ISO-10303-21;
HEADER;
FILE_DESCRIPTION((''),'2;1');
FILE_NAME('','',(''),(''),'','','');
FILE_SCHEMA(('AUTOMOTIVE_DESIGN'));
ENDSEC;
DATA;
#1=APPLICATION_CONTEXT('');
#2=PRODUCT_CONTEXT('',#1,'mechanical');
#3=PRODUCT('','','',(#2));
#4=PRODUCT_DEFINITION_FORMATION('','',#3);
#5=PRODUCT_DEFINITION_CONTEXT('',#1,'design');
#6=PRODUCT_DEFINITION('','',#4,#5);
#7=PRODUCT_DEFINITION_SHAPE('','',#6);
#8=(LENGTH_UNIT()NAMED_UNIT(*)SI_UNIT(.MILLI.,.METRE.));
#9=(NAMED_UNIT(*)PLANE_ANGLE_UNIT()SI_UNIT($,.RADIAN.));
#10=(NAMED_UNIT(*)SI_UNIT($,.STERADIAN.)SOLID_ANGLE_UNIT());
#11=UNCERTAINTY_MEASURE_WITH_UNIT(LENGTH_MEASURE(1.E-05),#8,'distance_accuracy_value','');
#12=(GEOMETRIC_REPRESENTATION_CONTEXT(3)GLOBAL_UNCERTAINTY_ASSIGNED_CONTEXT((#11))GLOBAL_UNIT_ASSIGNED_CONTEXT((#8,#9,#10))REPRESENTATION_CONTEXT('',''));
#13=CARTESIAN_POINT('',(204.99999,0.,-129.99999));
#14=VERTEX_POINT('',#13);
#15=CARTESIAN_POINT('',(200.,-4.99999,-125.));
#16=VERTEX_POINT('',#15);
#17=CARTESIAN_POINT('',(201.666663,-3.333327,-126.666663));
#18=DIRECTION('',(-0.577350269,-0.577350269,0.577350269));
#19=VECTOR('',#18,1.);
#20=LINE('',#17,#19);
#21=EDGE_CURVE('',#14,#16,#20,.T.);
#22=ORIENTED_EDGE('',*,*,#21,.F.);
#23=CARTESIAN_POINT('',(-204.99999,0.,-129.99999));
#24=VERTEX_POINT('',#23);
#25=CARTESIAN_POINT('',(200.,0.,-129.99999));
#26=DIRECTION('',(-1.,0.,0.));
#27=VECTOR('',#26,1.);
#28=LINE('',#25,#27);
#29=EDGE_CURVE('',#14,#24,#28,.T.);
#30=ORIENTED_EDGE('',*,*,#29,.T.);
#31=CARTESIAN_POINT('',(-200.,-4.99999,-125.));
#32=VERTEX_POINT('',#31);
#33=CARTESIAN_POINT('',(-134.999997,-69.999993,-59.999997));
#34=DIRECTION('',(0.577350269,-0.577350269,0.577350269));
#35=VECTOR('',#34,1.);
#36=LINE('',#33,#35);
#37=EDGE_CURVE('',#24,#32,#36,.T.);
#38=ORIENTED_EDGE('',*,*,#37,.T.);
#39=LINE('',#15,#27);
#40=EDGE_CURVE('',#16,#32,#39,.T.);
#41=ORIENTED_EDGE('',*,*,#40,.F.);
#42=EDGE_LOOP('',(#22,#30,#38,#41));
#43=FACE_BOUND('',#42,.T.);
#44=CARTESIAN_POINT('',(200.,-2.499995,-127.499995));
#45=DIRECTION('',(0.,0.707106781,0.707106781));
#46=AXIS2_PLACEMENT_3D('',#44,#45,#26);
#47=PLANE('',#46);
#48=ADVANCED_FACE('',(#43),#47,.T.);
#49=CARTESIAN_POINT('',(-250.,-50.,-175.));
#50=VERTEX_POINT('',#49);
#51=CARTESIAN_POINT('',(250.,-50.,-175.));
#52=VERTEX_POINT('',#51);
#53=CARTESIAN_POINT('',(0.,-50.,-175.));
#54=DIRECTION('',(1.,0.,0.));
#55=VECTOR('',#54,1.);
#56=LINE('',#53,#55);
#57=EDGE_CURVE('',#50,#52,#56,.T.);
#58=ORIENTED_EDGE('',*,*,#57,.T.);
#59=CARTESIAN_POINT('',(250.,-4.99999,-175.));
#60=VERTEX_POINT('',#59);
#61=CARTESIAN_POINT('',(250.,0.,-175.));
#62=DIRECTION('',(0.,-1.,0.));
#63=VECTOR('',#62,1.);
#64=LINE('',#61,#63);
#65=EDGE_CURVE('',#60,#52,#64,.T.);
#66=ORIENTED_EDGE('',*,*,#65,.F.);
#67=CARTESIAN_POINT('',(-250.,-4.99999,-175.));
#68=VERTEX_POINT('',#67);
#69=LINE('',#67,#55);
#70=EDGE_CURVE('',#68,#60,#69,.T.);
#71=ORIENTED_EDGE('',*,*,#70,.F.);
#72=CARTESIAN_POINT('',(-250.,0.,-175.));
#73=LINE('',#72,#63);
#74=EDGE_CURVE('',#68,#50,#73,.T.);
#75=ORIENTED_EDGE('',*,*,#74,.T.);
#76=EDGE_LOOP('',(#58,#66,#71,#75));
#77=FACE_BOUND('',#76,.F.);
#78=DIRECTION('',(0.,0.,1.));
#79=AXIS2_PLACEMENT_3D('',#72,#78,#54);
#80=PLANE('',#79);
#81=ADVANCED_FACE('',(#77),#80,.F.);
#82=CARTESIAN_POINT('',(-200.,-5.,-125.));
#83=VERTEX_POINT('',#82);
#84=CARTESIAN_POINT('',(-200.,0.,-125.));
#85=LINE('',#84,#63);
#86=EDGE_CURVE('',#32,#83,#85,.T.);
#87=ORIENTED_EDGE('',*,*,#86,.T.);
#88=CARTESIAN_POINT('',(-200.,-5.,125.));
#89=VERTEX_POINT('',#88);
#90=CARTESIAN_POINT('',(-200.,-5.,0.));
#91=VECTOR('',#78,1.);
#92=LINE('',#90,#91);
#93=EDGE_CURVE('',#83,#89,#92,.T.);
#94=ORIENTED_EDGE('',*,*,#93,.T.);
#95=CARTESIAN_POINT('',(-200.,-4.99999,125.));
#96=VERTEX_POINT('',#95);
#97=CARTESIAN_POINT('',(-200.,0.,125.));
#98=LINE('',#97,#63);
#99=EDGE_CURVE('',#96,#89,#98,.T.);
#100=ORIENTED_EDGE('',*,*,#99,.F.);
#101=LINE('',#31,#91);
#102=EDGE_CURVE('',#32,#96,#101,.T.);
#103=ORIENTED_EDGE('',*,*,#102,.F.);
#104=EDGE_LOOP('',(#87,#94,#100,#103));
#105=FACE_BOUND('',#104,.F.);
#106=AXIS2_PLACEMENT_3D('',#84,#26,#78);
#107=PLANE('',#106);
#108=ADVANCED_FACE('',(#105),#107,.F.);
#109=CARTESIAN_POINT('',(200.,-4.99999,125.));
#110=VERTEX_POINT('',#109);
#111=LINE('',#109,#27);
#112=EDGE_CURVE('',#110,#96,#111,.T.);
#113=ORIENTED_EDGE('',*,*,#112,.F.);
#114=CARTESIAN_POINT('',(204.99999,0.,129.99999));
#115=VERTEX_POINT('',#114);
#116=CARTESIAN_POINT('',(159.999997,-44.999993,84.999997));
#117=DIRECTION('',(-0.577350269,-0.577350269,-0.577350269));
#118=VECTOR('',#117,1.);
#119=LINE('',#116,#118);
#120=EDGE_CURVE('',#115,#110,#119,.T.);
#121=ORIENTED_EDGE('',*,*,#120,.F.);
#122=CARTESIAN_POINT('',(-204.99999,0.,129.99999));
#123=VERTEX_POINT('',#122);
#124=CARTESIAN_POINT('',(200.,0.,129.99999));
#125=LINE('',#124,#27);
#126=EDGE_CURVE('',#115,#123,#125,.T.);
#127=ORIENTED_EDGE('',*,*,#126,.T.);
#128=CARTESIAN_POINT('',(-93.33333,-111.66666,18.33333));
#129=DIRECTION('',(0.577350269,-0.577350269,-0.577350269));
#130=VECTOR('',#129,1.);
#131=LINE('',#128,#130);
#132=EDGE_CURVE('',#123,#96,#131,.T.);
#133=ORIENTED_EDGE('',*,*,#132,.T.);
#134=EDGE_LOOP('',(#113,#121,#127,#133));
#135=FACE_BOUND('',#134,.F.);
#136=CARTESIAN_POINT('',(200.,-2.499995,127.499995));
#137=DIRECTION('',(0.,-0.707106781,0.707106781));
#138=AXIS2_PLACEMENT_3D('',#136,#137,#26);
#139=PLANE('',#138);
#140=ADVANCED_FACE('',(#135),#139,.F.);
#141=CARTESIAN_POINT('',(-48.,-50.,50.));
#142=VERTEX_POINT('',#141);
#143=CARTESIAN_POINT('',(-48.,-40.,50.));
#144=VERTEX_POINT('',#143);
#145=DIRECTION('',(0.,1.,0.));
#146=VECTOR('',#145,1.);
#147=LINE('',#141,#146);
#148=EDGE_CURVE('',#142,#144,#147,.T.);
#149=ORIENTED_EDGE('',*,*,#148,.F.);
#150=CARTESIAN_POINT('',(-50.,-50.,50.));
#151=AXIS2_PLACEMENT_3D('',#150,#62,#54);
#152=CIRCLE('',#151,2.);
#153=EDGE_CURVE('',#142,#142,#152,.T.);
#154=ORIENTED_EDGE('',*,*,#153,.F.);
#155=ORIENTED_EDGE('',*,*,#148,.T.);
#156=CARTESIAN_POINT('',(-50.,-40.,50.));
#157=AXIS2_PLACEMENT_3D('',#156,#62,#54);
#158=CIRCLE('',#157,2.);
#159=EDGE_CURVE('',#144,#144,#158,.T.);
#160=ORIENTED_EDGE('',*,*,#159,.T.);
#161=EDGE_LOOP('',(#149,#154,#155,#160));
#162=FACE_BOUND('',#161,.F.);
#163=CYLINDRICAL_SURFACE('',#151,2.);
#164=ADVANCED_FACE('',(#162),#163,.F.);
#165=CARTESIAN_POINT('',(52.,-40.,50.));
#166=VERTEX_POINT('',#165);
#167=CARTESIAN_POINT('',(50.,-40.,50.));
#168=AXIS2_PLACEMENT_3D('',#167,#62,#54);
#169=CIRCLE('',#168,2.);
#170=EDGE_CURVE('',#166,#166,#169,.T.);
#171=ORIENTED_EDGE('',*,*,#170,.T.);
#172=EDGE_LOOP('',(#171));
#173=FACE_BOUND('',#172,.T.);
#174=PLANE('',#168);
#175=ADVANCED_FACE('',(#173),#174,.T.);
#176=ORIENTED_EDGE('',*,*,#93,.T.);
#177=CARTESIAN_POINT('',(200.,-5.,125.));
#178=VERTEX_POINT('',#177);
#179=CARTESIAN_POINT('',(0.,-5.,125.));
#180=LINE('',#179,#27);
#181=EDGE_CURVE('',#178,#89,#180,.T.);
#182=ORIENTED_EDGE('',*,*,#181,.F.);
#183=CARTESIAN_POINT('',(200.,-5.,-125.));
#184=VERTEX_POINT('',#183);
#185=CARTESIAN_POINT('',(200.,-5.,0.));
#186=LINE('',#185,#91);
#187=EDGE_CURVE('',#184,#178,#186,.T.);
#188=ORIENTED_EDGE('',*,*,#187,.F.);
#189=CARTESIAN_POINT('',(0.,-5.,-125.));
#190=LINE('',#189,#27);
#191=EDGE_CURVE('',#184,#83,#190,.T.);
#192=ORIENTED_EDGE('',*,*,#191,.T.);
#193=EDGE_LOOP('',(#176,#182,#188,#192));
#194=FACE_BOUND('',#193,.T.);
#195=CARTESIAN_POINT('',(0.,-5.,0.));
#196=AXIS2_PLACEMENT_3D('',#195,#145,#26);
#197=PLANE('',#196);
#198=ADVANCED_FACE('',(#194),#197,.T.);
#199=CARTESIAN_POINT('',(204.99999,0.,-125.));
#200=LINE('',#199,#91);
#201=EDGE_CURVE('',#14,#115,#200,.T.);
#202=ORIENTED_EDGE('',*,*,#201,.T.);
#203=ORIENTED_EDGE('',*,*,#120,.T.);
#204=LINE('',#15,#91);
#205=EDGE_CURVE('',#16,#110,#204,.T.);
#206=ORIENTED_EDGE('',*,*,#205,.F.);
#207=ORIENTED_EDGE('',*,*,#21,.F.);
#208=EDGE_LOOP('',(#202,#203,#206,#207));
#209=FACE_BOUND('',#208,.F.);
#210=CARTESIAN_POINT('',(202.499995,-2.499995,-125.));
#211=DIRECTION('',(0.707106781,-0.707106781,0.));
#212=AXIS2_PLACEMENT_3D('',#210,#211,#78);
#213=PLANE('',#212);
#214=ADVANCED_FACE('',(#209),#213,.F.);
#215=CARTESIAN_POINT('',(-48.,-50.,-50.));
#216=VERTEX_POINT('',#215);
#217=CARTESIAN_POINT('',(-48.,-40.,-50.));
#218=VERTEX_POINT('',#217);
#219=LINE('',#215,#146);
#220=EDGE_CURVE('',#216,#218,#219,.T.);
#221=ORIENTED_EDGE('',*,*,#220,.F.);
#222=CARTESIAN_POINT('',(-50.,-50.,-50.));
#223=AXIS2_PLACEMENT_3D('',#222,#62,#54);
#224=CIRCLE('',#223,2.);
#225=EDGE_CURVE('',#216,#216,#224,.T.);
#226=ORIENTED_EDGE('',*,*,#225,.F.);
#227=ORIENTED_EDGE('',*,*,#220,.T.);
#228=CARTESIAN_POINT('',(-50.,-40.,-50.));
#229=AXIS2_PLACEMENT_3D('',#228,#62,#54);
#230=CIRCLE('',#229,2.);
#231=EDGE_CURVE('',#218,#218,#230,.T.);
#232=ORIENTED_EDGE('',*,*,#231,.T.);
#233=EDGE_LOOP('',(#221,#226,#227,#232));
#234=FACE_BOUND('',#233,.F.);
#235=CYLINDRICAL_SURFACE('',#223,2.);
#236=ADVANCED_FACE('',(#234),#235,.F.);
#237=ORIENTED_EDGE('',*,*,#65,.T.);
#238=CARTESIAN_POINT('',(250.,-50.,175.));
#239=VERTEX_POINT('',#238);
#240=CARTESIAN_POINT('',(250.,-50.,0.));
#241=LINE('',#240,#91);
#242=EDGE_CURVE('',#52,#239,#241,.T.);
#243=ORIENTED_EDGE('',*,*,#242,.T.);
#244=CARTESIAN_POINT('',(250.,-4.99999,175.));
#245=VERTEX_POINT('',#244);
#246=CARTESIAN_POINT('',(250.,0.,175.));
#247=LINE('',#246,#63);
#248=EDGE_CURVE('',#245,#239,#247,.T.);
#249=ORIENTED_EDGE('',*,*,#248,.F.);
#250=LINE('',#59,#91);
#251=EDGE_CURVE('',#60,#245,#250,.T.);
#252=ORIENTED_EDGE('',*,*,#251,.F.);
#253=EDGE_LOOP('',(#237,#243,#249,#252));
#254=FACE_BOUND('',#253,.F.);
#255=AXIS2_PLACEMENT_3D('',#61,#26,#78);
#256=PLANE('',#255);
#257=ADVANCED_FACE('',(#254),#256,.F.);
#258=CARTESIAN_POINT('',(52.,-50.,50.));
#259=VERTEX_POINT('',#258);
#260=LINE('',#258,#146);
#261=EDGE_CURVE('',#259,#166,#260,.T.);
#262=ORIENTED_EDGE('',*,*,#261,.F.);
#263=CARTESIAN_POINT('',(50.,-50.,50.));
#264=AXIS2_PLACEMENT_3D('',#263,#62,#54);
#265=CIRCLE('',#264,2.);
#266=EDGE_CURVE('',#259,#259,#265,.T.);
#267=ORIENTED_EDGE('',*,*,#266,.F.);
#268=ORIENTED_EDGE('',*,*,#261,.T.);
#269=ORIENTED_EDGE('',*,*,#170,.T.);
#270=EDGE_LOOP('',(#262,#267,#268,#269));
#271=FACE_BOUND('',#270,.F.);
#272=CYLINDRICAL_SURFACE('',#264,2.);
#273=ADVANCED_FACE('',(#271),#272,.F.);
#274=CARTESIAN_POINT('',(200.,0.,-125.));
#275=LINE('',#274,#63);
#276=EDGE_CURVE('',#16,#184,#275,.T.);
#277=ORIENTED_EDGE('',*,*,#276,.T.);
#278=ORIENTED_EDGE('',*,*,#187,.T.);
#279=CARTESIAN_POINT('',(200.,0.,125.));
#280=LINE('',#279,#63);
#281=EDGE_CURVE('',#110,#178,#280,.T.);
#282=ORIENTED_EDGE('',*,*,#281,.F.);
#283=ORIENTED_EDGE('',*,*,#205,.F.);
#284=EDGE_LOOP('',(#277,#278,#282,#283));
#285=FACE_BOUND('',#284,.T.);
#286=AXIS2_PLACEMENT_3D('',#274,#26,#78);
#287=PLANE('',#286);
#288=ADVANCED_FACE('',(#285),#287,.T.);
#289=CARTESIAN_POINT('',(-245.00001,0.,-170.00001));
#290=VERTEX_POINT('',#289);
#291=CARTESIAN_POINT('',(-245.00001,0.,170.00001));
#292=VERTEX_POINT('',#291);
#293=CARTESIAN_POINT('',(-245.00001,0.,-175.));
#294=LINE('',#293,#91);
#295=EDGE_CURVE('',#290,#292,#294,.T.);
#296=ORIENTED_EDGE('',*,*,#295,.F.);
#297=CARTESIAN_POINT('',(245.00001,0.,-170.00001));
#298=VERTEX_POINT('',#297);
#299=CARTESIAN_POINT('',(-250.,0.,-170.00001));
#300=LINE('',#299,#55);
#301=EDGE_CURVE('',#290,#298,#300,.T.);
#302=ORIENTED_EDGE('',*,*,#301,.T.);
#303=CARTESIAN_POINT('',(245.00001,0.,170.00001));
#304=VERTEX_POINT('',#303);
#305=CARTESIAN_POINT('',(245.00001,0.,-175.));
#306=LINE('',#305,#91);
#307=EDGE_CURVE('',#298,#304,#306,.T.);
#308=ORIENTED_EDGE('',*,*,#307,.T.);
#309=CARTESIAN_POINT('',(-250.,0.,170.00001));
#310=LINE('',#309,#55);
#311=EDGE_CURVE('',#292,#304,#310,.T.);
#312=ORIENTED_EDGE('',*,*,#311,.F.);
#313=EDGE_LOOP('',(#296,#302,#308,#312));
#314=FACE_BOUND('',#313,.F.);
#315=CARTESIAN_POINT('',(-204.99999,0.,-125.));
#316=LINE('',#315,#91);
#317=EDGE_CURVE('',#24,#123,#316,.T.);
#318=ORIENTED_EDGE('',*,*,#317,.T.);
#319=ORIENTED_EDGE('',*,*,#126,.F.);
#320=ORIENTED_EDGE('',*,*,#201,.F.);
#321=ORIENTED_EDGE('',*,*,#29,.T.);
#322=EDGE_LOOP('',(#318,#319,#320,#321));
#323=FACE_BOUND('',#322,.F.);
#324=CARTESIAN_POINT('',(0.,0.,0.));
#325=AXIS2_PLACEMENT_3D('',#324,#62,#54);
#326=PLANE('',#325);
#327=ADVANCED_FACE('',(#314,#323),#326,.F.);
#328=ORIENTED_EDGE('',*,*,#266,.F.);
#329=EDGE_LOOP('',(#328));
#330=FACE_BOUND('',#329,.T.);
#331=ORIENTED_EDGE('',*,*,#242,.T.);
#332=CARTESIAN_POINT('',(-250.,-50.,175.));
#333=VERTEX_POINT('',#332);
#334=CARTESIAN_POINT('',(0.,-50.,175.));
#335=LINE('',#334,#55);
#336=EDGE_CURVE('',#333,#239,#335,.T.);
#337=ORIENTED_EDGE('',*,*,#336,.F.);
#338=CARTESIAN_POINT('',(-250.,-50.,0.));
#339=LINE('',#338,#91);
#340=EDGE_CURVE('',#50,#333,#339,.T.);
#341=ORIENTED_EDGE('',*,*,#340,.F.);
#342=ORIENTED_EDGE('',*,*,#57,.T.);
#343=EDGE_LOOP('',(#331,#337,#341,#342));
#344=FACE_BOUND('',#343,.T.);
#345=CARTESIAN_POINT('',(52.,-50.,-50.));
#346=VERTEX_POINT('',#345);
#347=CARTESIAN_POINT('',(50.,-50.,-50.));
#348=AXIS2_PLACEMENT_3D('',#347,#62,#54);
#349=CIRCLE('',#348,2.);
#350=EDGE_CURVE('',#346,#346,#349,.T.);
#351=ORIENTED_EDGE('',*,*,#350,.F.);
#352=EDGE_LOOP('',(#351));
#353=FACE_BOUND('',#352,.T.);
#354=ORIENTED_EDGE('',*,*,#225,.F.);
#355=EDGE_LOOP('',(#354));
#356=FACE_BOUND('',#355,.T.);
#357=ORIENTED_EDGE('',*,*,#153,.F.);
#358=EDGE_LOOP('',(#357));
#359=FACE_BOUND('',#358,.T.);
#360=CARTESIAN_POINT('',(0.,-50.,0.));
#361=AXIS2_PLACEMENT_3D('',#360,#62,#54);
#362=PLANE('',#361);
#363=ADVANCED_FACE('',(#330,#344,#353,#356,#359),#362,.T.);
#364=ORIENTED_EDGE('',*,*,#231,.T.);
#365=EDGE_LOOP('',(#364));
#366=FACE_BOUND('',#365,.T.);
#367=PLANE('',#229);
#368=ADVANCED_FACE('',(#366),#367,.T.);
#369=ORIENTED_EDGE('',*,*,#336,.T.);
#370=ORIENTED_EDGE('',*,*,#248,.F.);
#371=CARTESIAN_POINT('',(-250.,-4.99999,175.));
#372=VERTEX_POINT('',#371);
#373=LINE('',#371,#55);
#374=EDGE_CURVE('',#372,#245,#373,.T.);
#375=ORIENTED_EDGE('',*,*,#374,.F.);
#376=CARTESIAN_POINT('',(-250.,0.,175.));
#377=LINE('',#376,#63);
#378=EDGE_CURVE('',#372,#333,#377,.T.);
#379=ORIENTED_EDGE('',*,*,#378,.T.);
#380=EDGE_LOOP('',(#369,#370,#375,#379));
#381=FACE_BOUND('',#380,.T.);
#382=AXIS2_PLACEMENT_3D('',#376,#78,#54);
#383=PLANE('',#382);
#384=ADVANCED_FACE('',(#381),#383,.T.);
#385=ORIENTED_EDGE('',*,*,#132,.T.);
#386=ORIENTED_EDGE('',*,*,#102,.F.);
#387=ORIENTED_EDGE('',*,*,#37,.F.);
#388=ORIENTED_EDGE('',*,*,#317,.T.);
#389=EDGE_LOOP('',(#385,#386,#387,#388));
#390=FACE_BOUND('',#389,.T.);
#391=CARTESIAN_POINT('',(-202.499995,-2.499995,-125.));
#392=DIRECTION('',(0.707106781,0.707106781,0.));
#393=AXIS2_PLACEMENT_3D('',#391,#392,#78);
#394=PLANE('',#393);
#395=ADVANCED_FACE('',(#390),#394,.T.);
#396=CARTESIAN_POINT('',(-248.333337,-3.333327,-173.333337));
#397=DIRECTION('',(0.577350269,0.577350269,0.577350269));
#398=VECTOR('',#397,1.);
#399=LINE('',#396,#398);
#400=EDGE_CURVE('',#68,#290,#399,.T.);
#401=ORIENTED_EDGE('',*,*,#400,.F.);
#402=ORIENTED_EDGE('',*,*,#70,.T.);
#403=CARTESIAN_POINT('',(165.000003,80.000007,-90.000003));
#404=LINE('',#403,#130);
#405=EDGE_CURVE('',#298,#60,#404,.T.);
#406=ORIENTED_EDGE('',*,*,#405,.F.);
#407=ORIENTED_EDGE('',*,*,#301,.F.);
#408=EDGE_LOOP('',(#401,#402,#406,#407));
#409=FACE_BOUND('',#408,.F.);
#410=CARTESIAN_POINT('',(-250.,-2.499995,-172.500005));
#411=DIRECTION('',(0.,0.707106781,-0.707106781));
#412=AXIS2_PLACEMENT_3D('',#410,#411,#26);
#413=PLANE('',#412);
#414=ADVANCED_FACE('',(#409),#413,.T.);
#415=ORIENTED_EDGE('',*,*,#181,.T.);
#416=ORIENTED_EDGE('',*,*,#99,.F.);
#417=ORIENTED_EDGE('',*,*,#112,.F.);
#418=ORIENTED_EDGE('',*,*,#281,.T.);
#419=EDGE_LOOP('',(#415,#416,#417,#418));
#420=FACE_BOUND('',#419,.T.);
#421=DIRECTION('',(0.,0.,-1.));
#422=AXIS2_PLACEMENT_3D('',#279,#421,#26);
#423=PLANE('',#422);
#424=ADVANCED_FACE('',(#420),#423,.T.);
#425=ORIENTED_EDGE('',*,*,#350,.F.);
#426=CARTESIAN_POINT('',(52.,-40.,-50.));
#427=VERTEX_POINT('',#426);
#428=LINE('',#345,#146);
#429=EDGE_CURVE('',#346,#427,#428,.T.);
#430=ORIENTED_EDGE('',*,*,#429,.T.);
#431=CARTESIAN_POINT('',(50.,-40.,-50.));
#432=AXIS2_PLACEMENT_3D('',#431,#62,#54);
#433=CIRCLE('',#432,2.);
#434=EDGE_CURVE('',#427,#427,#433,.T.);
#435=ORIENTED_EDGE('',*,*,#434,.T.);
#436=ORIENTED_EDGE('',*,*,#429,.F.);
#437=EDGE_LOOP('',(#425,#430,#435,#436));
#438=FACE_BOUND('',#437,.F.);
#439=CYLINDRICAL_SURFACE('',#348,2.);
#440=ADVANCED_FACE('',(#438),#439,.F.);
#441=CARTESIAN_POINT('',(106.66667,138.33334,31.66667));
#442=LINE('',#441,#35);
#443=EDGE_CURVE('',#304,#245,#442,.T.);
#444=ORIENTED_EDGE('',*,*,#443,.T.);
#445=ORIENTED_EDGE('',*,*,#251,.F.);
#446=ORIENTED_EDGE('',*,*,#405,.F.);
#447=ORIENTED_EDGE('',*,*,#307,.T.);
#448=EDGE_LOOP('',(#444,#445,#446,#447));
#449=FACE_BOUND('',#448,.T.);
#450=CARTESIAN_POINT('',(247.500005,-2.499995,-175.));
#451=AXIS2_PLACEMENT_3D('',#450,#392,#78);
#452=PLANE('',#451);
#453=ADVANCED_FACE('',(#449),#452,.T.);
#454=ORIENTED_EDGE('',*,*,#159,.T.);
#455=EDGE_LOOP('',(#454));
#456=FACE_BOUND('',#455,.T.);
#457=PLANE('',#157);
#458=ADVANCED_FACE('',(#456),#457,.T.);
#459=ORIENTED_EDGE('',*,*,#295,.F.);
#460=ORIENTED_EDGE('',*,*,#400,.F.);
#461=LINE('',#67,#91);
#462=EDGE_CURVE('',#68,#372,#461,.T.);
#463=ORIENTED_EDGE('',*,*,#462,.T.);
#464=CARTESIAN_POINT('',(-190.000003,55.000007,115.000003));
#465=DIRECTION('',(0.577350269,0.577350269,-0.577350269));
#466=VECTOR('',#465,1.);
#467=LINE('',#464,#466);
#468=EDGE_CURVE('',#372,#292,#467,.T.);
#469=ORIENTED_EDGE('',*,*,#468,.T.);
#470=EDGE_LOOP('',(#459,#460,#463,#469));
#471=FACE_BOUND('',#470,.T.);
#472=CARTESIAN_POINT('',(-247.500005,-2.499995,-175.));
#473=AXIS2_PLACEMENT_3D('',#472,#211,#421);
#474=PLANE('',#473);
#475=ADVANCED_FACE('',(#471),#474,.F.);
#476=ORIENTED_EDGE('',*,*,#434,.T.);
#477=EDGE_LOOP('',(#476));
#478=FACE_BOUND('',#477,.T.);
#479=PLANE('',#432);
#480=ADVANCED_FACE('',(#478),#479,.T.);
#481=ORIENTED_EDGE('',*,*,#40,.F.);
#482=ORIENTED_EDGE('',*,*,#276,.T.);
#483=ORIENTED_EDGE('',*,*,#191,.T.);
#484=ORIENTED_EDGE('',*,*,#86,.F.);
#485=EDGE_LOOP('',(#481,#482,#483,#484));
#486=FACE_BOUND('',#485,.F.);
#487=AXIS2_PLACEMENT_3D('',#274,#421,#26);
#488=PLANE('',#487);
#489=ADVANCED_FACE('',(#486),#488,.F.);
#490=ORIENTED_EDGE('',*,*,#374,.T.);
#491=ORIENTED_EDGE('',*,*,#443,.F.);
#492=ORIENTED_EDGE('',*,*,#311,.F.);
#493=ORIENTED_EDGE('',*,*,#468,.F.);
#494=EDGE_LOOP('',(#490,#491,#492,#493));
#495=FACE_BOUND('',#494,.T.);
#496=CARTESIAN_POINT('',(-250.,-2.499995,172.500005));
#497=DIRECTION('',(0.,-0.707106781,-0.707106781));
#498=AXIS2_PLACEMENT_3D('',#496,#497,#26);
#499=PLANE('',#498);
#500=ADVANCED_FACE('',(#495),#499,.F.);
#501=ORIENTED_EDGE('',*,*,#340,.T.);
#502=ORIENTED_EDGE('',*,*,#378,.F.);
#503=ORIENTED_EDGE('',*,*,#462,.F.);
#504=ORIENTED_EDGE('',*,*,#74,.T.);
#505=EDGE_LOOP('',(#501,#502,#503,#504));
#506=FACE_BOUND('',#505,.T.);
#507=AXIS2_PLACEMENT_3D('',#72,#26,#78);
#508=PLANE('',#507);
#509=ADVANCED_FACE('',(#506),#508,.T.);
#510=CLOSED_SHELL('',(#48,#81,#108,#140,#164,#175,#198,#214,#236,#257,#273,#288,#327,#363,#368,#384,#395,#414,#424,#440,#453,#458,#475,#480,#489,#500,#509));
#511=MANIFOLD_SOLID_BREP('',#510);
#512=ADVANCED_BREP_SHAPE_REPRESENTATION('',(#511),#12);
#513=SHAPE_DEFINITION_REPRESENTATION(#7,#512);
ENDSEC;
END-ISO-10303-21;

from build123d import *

# Parameters (mm, degrees)
F0_W     = 500
F0_H     = 350
F1_DEPTH = 50
F2_R     = 2
F3_DEPTH = 10
F4_W     = 400
F4_H     = 250
F5_DEPTH = 5
F6_SIZE  = 4.99999


# Not quite as in the source:
# - a fillet or chamfer is up to 0.001 mm smaller than in the source, because OpenCascade refuses the exact size


with BuildPart() as f1:
    # F0 (on Front) → F1 (new body)
    with BuildSketch(Plane.XZ):
        Rectangle(F0_W, F0_H)
    extrude(amount=F1_DEPTH)

    # F2 (on face) → F3 (cut)
    with BuildSketch(Plane.XZ.offset(50)):
        with Locations((-50, 50)):
            Circle(F2_R)
        with Locations((50, 50)):
            Circle(F2_R)
        with Locations((50, -50)):
            Circle(F2_R)
        with Locations((-50, -50)):
            Circle(F2_R)
    extrude(amount=-F3_DEPTH, mode=Mode.SUBTRACT)

    # F4 (on face) → F5 (cut)
    with BuildSketch(Plane(origin=(0, 0, 0), x_dir=(-1, 0, 0), z_dir=(0, 1, 0))):
        Rectangle(F4_W, F4_H)
    extrude(amount=-F5_DEPTH, mode=Mode.SUBTRACT)

    # F6 (size 5 in the source; OpenCascade refuses exactly that, so slightly less here)
    f6_edges = [f1.edges().sort_by_distance(p)[0] for p in [
        (250, 0, 0),
        (0, 0, -175),
        (0, 0, 175),
        (-250, 0, 0),
        (-200, 0, 0),
        (0, 0, -125),
        (200, 0, 0),
        (0, 0, 125),
    ]]
    chamfer(f6_edges, length=F6_SIZE)


solid = f1.part
